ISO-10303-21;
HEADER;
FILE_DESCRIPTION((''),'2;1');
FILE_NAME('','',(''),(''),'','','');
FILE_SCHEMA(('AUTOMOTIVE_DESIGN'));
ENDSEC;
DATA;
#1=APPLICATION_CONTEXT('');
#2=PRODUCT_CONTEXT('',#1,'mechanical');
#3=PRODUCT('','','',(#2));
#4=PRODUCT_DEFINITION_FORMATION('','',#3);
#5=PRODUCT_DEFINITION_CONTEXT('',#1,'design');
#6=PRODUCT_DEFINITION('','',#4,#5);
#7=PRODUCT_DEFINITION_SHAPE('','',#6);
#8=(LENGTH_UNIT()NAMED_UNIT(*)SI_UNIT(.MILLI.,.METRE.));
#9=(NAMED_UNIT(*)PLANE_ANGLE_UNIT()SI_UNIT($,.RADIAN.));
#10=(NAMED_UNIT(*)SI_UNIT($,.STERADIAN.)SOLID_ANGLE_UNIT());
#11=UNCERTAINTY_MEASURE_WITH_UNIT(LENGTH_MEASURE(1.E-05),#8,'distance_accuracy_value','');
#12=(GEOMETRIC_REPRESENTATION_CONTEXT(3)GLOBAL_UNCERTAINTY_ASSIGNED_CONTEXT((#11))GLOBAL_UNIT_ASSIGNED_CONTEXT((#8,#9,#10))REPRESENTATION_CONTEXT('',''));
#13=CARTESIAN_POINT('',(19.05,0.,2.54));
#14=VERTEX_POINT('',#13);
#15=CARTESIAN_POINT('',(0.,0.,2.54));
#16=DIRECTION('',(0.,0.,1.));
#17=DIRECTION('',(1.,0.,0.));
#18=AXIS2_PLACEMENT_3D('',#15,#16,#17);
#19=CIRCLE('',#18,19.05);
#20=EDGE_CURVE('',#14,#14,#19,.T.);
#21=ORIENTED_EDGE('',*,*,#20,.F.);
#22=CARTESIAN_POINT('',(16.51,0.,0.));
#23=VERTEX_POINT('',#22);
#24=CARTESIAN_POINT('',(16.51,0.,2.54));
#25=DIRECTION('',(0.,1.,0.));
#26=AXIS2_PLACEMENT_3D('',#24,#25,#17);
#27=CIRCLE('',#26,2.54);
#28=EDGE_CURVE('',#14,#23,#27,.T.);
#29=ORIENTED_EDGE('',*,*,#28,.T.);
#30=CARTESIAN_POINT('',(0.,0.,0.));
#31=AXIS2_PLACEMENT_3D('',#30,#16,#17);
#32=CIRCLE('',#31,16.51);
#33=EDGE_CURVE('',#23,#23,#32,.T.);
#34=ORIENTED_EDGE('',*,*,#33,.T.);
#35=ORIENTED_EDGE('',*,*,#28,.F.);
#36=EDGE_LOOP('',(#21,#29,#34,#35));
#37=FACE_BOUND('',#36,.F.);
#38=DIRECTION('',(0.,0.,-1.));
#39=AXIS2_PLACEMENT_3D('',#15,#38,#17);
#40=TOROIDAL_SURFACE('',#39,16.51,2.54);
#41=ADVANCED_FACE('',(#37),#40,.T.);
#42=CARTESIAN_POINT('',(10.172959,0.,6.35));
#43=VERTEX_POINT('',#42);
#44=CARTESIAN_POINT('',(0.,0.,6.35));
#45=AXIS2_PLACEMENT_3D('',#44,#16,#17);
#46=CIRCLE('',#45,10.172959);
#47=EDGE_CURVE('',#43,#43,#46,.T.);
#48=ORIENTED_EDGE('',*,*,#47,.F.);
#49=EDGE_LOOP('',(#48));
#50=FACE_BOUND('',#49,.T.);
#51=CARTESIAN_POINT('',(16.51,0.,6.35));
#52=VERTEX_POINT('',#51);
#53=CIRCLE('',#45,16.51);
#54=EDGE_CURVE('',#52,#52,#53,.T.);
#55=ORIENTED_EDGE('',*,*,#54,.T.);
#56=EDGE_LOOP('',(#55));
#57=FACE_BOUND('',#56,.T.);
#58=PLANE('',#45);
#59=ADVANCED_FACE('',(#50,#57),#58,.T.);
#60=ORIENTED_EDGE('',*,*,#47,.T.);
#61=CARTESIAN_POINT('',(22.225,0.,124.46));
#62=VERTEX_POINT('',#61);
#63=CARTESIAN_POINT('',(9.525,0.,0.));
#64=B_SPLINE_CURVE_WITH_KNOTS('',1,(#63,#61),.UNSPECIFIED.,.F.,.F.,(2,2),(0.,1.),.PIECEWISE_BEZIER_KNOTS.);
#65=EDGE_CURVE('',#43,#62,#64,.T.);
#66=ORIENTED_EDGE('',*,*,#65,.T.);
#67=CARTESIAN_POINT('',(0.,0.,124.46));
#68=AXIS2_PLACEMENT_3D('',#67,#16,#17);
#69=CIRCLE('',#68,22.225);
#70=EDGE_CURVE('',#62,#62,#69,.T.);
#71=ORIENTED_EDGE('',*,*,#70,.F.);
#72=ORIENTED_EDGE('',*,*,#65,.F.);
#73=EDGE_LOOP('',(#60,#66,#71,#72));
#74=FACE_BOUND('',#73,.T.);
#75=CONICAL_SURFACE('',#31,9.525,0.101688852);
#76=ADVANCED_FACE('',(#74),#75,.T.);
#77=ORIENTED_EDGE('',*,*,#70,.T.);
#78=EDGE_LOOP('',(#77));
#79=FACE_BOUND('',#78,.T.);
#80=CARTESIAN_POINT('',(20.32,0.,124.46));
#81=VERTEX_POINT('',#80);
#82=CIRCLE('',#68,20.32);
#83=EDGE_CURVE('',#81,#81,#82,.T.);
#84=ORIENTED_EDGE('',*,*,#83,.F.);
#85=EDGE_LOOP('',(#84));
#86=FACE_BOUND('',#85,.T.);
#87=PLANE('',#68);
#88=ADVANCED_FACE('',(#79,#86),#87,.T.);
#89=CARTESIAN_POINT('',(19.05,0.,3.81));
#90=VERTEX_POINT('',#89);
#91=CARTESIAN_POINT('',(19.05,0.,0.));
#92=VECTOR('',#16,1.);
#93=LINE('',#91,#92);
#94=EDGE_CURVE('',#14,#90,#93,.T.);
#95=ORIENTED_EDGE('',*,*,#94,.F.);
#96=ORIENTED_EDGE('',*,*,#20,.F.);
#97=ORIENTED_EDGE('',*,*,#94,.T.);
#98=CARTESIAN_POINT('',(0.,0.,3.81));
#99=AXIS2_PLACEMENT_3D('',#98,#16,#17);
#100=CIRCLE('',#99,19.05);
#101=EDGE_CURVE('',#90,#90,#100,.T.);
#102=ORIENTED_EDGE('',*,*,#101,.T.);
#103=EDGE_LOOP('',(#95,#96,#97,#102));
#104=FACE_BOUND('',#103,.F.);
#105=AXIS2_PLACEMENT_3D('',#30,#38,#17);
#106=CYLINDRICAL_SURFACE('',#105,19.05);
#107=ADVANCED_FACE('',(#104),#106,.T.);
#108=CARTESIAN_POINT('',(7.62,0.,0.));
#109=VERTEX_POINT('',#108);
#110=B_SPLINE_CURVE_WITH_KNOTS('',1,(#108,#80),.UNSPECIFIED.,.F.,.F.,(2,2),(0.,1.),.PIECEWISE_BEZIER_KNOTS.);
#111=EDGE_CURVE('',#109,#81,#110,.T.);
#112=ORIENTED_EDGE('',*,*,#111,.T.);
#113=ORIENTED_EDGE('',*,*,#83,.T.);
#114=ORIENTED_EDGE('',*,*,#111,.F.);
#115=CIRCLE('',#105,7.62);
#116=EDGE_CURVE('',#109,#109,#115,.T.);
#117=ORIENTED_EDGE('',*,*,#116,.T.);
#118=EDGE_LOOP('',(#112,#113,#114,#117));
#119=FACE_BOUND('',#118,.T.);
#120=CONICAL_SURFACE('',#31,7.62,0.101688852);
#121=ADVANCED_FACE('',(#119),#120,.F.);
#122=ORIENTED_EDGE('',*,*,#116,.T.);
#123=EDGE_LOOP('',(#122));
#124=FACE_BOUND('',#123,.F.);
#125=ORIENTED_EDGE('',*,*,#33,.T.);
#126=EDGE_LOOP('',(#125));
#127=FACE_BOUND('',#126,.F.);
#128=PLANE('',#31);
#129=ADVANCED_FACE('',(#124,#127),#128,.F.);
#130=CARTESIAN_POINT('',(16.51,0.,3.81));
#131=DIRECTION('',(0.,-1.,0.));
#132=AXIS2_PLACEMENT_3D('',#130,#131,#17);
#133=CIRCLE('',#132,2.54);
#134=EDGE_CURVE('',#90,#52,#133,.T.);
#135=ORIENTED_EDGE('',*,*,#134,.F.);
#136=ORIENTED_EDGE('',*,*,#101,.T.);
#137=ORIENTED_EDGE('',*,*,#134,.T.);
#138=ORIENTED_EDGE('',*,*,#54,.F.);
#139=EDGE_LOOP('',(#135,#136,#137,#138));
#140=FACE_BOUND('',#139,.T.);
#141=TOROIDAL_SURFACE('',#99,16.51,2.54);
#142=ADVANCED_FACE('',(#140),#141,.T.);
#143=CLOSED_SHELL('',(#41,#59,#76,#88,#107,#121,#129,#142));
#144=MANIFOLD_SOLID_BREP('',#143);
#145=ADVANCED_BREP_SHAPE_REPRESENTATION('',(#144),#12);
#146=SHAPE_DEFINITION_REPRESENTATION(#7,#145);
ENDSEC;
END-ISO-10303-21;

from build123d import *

# Parameters (mm, degrees)
F0_R     = 9.525
F2_R     = 22.225
F6_R     = 19.05
F7_DEPTH = 6.35
F5_R     = 7.62
F4_R     = 20.32
F9_R     = 2.54


with BuildPart() as f3:
    # F0 (on Top) → F3 section 0
    with BuildSketch(Plane.XY):
        Circle(F0_R)
    # F2 (on offset) → F3 section 1
    with BuildSketch(Plane.XY.offset(124.46)):
        Circle(F2_R)
    loft()

    # F6 (on Top) → F7 (join)
    with BuildSketch(Plane.XY):
        Circle(F6_R)
    extrude(amount=F7_DEPTH)

    # F5 (on face) → F8 section 0
    with BuildSketch(Plane(origin=(0, 0, 0), x_dir=(1, 0, 0), z_dir=(0, 0, -1))):
        Circle(F5_R)
    # F4 (on face) → F8 section 1
    with BuildSketch(Plane.XY.offset(124.46)):
        Circle(F4_R)
    loft(mode=Mode.SUBTRACT)

    # F9
    f9_edges = [f3.edges().sort_by_distance(p)[0] for p in [
        (-19.05, 0, 6.35),
        (-19.05, 0, 0),
    ]]
    fillet(f9_edges, radius=F9_R)


solid = f3.part
